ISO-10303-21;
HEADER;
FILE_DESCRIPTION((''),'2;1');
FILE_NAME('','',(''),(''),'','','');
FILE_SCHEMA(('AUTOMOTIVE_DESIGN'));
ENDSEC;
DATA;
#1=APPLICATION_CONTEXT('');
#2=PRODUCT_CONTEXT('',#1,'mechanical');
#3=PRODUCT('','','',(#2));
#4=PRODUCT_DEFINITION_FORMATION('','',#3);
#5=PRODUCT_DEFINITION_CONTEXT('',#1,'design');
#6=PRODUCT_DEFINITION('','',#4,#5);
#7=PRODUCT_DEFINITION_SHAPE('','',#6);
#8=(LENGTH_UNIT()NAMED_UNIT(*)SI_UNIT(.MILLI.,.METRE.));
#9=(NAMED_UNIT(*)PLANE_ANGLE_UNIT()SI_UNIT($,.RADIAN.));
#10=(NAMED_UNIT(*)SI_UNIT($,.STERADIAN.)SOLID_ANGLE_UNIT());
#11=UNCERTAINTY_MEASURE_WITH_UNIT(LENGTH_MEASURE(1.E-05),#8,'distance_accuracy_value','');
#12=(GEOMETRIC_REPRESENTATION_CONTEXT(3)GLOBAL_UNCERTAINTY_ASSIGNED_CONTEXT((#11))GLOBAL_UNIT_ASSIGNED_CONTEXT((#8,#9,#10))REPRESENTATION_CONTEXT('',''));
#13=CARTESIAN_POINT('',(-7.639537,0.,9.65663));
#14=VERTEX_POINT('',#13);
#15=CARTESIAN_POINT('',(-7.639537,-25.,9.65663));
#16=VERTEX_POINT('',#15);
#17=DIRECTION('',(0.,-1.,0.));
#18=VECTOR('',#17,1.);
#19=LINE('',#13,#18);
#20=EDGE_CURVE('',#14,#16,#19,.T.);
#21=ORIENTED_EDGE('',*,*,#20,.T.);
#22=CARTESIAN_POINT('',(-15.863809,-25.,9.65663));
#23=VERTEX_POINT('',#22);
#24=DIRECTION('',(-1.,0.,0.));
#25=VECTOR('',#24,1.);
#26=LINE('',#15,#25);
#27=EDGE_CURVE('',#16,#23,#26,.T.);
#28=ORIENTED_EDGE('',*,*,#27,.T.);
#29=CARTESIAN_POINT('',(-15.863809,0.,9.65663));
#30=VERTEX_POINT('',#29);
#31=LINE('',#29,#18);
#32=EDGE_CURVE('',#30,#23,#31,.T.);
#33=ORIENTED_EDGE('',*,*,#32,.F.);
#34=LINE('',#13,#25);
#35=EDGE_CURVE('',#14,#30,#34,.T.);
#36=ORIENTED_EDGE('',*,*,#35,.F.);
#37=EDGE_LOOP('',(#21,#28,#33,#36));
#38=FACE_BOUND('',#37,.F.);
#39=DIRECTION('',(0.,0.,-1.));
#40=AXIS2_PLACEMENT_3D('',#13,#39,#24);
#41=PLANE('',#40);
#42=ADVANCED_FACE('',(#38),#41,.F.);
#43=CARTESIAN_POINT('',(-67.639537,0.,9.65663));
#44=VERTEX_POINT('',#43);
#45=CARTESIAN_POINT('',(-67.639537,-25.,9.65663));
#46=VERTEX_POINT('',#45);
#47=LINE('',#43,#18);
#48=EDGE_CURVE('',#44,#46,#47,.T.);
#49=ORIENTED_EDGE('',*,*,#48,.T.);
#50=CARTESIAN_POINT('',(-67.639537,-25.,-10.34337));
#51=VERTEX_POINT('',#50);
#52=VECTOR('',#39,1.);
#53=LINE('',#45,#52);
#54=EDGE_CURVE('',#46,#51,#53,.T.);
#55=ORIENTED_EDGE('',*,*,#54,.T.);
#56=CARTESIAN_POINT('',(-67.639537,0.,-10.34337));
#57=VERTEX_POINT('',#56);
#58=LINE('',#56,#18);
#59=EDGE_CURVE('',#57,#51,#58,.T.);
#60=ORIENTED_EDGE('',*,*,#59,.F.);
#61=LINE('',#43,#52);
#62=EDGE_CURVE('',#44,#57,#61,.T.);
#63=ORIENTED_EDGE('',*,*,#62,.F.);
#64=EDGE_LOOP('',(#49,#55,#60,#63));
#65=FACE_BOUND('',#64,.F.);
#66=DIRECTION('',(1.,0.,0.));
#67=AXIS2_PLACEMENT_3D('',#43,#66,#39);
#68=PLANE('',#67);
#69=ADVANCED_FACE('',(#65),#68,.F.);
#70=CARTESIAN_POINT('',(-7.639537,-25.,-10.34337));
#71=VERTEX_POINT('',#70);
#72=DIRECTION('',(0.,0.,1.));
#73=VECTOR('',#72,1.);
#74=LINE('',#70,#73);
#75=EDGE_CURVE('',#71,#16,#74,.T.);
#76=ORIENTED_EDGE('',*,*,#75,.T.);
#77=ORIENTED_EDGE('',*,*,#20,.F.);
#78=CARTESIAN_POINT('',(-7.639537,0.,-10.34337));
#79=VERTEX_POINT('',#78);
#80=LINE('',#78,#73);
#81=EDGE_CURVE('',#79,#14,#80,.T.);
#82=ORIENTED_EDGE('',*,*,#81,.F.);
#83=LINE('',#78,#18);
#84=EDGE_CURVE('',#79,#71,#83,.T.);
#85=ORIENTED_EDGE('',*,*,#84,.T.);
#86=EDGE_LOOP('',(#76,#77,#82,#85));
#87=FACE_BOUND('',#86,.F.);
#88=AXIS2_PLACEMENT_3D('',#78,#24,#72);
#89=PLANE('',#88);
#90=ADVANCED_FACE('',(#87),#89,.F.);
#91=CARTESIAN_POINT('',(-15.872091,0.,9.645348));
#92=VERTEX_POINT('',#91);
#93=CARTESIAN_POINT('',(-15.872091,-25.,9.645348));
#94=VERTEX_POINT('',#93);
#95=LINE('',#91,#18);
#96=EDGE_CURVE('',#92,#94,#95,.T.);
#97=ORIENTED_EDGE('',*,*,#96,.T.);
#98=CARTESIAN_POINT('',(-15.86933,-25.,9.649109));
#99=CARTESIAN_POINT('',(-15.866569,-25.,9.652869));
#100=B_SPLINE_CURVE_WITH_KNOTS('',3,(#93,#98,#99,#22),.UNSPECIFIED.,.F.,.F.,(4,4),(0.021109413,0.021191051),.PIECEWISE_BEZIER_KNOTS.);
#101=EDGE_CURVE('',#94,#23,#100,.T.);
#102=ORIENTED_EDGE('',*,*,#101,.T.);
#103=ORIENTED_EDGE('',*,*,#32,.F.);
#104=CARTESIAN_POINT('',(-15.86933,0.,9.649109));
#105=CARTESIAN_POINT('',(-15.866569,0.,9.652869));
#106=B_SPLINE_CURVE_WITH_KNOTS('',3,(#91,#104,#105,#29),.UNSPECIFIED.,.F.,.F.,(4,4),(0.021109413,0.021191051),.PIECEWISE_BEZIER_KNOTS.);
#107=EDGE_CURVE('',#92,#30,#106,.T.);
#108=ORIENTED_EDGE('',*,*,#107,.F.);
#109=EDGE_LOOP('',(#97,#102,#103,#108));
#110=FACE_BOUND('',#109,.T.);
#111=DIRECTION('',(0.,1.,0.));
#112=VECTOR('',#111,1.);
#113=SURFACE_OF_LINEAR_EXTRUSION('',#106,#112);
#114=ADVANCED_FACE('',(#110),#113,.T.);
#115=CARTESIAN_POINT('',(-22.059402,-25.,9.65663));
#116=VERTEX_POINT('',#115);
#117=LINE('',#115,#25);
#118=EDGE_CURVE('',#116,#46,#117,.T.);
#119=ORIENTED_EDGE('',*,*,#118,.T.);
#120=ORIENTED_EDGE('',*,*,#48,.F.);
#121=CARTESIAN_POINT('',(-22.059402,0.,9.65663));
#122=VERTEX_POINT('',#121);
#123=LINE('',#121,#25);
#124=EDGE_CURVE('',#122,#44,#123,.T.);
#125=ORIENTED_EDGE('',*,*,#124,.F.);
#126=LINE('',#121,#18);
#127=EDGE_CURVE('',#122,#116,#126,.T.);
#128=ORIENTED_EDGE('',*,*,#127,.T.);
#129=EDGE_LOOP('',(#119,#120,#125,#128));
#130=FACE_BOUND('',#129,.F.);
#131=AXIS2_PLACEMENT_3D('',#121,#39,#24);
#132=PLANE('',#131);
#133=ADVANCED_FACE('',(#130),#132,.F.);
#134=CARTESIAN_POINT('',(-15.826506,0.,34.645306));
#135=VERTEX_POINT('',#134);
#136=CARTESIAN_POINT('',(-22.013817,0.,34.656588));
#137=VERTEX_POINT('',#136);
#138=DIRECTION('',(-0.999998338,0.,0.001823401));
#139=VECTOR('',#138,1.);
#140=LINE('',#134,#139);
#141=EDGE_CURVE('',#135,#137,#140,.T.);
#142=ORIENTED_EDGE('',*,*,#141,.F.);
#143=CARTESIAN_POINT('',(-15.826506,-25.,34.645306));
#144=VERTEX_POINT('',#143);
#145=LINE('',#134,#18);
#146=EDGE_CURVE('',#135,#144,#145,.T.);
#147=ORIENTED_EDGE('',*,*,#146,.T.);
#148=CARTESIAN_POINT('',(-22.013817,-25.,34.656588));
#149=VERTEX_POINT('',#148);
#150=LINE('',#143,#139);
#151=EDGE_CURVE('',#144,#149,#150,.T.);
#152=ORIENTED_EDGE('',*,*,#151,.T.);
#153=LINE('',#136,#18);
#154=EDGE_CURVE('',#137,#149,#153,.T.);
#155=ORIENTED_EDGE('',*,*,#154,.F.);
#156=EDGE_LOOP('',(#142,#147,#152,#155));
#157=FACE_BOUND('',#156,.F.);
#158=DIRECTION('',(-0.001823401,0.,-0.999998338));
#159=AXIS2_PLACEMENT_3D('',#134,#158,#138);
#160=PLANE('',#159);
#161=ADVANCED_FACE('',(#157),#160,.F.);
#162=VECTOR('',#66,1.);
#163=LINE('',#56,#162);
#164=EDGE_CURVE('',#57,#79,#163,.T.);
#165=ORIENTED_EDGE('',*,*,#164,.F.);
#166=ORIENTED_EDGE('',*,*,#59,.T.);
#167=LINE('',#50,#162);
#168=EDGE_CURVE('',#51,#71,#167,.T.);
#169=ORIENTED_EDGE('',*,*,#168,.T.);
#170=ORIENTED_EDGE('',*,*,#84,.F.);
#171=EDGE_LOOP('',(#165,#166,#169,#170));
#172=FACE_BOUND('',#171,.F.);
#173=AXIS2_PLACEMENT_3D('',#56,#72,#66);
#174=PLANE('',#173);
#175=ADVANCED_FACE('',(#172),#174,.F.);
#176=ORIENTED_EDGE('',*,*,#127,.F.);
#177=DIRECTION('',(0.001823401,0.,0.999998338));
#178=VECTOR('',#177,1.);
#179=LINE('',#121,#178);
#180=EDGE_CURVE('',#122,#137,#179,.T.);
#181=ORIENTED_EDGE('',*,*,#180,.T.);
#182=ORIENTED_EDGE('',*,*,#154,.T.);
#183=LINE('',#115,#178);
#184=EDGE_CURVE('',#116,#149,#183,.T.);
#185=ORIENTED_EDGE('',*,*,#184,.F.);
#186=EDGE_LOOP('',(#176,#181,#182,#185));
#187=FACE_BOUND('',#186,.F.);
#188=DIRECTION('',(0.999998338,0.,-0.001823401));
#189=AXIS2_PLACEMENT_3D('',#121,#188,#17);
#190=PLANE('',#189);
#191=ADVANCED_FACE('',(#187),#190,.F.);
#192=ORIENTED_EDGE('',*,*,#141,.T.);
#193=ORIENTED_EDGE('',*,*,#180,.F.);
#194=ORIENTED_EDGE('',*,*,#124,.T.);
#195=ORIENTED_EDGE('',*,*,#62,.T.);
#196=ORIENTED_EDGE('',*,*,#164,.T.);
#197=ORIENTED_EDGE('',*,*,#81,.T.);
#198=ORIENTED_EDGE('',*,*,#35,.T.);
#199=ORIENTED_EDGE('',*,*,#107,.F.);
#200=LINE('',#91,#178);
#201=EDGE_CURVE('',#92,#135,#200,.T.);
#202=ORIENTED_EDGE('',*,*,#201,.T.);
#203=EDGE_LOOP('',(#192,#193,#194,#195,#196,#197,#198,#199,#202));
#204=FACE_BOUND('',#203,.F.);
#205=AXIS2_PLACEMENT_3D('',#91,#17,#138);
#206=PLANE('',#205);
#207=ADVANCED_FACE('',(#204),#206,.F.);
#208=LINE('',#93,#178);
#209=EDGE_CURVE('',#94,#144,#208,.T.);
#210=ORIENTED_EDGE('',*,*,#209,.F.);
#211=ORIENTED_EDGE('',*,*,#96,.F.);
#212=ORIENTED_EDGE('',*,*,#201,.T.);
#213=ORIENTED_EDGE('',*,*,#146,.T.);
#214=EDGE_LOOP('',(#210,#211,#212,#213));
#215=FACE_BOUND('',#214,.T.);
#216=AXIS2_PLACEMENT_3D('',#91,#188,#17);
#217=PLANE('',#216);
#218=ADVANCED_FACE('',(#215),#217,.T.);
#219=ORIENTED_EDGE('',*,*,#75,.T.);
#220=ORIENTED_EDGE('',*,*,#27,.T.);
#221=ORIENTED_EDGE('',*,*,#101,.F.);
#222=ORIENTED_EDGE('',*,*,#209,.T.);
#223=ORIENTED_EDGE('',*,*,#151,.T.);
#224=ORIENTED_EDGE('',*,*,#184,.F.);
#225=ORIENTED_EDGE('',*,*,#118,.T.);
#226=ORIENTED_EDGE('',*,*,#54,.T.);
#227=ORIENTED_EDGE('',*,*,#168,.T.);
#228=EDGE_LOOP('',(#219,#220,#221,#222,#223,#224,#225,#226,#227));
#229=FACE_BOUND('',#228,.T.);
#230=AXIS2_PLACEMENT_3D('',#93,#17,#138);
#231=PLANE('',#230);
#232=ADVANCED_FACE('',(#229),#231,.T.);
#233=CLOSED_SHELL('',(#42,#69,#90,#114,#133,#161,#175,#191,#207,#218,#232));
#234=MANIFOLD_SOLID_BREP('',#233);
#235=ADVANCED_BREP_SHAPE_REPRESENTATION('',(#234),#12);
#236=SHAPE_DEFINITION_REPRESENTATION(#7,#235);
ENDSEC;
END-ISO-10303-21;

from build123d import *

# Parameters (mm, degrees)
F1_DEPTH = 25
F2_DEPTH = 25


# Not quite as in the source:
# - ends of sketch curves that miss each other by under 0.0002 mm in the source are joined
# - the dataset's text gives a spline's control points without its knots; the knots are read off the source's solid


with BuildPart() as f1:
    # F0 (on Front) → F1 (new body)
    with BuildSketch(Plane.XZ):
        with BuildLine():
            Line((-22.0594022245, 9.6566297112), (-67.6395371556, 9.6566297112))
            Line((-67.6395371556, 9.6566297112), (-67.6395371556, -10.3433702888))
            Line((-67.6395371556, -10.3433702888), (-7.6395371556, -10.3433702888))
            Line((-7.6395371556, -10.3433702888), (-7.6395371556, 9.6566297112))
            Line((-7.6395371556, 9.6566297112), (-15.8638085328, 9.6566297112))
            add(Edge.make_bspline(
                [(-15.872090736, 9.6453477446), (-15.8693299564, 9.6491085329), (-15.866569222, 9.6528691885), (-15.8638085328, 9.6566297112)],
                knots=[0.0211094133, 0.0211094133, 0.0211094133, 0.0211094133, 0.0211910509, 0.0211910509, 0.0211910509, 0.0211910509], degree=3))
            Line((-15.872090736, 9.6453477446), (-22.0594022245, 9.6566297112))
        make_face()
    extrude(amount=F1_DEPTH)

    # F2 (add): a face of the model
    f2_faces = [f1.faces().sort_by_distance(p)[0] for p in [
        (-18.9657464803, -12.5, 9.6509887279),
    ]]
    extrude(f2_faces, amount=F2_DEPTH)


solid = f1.part
